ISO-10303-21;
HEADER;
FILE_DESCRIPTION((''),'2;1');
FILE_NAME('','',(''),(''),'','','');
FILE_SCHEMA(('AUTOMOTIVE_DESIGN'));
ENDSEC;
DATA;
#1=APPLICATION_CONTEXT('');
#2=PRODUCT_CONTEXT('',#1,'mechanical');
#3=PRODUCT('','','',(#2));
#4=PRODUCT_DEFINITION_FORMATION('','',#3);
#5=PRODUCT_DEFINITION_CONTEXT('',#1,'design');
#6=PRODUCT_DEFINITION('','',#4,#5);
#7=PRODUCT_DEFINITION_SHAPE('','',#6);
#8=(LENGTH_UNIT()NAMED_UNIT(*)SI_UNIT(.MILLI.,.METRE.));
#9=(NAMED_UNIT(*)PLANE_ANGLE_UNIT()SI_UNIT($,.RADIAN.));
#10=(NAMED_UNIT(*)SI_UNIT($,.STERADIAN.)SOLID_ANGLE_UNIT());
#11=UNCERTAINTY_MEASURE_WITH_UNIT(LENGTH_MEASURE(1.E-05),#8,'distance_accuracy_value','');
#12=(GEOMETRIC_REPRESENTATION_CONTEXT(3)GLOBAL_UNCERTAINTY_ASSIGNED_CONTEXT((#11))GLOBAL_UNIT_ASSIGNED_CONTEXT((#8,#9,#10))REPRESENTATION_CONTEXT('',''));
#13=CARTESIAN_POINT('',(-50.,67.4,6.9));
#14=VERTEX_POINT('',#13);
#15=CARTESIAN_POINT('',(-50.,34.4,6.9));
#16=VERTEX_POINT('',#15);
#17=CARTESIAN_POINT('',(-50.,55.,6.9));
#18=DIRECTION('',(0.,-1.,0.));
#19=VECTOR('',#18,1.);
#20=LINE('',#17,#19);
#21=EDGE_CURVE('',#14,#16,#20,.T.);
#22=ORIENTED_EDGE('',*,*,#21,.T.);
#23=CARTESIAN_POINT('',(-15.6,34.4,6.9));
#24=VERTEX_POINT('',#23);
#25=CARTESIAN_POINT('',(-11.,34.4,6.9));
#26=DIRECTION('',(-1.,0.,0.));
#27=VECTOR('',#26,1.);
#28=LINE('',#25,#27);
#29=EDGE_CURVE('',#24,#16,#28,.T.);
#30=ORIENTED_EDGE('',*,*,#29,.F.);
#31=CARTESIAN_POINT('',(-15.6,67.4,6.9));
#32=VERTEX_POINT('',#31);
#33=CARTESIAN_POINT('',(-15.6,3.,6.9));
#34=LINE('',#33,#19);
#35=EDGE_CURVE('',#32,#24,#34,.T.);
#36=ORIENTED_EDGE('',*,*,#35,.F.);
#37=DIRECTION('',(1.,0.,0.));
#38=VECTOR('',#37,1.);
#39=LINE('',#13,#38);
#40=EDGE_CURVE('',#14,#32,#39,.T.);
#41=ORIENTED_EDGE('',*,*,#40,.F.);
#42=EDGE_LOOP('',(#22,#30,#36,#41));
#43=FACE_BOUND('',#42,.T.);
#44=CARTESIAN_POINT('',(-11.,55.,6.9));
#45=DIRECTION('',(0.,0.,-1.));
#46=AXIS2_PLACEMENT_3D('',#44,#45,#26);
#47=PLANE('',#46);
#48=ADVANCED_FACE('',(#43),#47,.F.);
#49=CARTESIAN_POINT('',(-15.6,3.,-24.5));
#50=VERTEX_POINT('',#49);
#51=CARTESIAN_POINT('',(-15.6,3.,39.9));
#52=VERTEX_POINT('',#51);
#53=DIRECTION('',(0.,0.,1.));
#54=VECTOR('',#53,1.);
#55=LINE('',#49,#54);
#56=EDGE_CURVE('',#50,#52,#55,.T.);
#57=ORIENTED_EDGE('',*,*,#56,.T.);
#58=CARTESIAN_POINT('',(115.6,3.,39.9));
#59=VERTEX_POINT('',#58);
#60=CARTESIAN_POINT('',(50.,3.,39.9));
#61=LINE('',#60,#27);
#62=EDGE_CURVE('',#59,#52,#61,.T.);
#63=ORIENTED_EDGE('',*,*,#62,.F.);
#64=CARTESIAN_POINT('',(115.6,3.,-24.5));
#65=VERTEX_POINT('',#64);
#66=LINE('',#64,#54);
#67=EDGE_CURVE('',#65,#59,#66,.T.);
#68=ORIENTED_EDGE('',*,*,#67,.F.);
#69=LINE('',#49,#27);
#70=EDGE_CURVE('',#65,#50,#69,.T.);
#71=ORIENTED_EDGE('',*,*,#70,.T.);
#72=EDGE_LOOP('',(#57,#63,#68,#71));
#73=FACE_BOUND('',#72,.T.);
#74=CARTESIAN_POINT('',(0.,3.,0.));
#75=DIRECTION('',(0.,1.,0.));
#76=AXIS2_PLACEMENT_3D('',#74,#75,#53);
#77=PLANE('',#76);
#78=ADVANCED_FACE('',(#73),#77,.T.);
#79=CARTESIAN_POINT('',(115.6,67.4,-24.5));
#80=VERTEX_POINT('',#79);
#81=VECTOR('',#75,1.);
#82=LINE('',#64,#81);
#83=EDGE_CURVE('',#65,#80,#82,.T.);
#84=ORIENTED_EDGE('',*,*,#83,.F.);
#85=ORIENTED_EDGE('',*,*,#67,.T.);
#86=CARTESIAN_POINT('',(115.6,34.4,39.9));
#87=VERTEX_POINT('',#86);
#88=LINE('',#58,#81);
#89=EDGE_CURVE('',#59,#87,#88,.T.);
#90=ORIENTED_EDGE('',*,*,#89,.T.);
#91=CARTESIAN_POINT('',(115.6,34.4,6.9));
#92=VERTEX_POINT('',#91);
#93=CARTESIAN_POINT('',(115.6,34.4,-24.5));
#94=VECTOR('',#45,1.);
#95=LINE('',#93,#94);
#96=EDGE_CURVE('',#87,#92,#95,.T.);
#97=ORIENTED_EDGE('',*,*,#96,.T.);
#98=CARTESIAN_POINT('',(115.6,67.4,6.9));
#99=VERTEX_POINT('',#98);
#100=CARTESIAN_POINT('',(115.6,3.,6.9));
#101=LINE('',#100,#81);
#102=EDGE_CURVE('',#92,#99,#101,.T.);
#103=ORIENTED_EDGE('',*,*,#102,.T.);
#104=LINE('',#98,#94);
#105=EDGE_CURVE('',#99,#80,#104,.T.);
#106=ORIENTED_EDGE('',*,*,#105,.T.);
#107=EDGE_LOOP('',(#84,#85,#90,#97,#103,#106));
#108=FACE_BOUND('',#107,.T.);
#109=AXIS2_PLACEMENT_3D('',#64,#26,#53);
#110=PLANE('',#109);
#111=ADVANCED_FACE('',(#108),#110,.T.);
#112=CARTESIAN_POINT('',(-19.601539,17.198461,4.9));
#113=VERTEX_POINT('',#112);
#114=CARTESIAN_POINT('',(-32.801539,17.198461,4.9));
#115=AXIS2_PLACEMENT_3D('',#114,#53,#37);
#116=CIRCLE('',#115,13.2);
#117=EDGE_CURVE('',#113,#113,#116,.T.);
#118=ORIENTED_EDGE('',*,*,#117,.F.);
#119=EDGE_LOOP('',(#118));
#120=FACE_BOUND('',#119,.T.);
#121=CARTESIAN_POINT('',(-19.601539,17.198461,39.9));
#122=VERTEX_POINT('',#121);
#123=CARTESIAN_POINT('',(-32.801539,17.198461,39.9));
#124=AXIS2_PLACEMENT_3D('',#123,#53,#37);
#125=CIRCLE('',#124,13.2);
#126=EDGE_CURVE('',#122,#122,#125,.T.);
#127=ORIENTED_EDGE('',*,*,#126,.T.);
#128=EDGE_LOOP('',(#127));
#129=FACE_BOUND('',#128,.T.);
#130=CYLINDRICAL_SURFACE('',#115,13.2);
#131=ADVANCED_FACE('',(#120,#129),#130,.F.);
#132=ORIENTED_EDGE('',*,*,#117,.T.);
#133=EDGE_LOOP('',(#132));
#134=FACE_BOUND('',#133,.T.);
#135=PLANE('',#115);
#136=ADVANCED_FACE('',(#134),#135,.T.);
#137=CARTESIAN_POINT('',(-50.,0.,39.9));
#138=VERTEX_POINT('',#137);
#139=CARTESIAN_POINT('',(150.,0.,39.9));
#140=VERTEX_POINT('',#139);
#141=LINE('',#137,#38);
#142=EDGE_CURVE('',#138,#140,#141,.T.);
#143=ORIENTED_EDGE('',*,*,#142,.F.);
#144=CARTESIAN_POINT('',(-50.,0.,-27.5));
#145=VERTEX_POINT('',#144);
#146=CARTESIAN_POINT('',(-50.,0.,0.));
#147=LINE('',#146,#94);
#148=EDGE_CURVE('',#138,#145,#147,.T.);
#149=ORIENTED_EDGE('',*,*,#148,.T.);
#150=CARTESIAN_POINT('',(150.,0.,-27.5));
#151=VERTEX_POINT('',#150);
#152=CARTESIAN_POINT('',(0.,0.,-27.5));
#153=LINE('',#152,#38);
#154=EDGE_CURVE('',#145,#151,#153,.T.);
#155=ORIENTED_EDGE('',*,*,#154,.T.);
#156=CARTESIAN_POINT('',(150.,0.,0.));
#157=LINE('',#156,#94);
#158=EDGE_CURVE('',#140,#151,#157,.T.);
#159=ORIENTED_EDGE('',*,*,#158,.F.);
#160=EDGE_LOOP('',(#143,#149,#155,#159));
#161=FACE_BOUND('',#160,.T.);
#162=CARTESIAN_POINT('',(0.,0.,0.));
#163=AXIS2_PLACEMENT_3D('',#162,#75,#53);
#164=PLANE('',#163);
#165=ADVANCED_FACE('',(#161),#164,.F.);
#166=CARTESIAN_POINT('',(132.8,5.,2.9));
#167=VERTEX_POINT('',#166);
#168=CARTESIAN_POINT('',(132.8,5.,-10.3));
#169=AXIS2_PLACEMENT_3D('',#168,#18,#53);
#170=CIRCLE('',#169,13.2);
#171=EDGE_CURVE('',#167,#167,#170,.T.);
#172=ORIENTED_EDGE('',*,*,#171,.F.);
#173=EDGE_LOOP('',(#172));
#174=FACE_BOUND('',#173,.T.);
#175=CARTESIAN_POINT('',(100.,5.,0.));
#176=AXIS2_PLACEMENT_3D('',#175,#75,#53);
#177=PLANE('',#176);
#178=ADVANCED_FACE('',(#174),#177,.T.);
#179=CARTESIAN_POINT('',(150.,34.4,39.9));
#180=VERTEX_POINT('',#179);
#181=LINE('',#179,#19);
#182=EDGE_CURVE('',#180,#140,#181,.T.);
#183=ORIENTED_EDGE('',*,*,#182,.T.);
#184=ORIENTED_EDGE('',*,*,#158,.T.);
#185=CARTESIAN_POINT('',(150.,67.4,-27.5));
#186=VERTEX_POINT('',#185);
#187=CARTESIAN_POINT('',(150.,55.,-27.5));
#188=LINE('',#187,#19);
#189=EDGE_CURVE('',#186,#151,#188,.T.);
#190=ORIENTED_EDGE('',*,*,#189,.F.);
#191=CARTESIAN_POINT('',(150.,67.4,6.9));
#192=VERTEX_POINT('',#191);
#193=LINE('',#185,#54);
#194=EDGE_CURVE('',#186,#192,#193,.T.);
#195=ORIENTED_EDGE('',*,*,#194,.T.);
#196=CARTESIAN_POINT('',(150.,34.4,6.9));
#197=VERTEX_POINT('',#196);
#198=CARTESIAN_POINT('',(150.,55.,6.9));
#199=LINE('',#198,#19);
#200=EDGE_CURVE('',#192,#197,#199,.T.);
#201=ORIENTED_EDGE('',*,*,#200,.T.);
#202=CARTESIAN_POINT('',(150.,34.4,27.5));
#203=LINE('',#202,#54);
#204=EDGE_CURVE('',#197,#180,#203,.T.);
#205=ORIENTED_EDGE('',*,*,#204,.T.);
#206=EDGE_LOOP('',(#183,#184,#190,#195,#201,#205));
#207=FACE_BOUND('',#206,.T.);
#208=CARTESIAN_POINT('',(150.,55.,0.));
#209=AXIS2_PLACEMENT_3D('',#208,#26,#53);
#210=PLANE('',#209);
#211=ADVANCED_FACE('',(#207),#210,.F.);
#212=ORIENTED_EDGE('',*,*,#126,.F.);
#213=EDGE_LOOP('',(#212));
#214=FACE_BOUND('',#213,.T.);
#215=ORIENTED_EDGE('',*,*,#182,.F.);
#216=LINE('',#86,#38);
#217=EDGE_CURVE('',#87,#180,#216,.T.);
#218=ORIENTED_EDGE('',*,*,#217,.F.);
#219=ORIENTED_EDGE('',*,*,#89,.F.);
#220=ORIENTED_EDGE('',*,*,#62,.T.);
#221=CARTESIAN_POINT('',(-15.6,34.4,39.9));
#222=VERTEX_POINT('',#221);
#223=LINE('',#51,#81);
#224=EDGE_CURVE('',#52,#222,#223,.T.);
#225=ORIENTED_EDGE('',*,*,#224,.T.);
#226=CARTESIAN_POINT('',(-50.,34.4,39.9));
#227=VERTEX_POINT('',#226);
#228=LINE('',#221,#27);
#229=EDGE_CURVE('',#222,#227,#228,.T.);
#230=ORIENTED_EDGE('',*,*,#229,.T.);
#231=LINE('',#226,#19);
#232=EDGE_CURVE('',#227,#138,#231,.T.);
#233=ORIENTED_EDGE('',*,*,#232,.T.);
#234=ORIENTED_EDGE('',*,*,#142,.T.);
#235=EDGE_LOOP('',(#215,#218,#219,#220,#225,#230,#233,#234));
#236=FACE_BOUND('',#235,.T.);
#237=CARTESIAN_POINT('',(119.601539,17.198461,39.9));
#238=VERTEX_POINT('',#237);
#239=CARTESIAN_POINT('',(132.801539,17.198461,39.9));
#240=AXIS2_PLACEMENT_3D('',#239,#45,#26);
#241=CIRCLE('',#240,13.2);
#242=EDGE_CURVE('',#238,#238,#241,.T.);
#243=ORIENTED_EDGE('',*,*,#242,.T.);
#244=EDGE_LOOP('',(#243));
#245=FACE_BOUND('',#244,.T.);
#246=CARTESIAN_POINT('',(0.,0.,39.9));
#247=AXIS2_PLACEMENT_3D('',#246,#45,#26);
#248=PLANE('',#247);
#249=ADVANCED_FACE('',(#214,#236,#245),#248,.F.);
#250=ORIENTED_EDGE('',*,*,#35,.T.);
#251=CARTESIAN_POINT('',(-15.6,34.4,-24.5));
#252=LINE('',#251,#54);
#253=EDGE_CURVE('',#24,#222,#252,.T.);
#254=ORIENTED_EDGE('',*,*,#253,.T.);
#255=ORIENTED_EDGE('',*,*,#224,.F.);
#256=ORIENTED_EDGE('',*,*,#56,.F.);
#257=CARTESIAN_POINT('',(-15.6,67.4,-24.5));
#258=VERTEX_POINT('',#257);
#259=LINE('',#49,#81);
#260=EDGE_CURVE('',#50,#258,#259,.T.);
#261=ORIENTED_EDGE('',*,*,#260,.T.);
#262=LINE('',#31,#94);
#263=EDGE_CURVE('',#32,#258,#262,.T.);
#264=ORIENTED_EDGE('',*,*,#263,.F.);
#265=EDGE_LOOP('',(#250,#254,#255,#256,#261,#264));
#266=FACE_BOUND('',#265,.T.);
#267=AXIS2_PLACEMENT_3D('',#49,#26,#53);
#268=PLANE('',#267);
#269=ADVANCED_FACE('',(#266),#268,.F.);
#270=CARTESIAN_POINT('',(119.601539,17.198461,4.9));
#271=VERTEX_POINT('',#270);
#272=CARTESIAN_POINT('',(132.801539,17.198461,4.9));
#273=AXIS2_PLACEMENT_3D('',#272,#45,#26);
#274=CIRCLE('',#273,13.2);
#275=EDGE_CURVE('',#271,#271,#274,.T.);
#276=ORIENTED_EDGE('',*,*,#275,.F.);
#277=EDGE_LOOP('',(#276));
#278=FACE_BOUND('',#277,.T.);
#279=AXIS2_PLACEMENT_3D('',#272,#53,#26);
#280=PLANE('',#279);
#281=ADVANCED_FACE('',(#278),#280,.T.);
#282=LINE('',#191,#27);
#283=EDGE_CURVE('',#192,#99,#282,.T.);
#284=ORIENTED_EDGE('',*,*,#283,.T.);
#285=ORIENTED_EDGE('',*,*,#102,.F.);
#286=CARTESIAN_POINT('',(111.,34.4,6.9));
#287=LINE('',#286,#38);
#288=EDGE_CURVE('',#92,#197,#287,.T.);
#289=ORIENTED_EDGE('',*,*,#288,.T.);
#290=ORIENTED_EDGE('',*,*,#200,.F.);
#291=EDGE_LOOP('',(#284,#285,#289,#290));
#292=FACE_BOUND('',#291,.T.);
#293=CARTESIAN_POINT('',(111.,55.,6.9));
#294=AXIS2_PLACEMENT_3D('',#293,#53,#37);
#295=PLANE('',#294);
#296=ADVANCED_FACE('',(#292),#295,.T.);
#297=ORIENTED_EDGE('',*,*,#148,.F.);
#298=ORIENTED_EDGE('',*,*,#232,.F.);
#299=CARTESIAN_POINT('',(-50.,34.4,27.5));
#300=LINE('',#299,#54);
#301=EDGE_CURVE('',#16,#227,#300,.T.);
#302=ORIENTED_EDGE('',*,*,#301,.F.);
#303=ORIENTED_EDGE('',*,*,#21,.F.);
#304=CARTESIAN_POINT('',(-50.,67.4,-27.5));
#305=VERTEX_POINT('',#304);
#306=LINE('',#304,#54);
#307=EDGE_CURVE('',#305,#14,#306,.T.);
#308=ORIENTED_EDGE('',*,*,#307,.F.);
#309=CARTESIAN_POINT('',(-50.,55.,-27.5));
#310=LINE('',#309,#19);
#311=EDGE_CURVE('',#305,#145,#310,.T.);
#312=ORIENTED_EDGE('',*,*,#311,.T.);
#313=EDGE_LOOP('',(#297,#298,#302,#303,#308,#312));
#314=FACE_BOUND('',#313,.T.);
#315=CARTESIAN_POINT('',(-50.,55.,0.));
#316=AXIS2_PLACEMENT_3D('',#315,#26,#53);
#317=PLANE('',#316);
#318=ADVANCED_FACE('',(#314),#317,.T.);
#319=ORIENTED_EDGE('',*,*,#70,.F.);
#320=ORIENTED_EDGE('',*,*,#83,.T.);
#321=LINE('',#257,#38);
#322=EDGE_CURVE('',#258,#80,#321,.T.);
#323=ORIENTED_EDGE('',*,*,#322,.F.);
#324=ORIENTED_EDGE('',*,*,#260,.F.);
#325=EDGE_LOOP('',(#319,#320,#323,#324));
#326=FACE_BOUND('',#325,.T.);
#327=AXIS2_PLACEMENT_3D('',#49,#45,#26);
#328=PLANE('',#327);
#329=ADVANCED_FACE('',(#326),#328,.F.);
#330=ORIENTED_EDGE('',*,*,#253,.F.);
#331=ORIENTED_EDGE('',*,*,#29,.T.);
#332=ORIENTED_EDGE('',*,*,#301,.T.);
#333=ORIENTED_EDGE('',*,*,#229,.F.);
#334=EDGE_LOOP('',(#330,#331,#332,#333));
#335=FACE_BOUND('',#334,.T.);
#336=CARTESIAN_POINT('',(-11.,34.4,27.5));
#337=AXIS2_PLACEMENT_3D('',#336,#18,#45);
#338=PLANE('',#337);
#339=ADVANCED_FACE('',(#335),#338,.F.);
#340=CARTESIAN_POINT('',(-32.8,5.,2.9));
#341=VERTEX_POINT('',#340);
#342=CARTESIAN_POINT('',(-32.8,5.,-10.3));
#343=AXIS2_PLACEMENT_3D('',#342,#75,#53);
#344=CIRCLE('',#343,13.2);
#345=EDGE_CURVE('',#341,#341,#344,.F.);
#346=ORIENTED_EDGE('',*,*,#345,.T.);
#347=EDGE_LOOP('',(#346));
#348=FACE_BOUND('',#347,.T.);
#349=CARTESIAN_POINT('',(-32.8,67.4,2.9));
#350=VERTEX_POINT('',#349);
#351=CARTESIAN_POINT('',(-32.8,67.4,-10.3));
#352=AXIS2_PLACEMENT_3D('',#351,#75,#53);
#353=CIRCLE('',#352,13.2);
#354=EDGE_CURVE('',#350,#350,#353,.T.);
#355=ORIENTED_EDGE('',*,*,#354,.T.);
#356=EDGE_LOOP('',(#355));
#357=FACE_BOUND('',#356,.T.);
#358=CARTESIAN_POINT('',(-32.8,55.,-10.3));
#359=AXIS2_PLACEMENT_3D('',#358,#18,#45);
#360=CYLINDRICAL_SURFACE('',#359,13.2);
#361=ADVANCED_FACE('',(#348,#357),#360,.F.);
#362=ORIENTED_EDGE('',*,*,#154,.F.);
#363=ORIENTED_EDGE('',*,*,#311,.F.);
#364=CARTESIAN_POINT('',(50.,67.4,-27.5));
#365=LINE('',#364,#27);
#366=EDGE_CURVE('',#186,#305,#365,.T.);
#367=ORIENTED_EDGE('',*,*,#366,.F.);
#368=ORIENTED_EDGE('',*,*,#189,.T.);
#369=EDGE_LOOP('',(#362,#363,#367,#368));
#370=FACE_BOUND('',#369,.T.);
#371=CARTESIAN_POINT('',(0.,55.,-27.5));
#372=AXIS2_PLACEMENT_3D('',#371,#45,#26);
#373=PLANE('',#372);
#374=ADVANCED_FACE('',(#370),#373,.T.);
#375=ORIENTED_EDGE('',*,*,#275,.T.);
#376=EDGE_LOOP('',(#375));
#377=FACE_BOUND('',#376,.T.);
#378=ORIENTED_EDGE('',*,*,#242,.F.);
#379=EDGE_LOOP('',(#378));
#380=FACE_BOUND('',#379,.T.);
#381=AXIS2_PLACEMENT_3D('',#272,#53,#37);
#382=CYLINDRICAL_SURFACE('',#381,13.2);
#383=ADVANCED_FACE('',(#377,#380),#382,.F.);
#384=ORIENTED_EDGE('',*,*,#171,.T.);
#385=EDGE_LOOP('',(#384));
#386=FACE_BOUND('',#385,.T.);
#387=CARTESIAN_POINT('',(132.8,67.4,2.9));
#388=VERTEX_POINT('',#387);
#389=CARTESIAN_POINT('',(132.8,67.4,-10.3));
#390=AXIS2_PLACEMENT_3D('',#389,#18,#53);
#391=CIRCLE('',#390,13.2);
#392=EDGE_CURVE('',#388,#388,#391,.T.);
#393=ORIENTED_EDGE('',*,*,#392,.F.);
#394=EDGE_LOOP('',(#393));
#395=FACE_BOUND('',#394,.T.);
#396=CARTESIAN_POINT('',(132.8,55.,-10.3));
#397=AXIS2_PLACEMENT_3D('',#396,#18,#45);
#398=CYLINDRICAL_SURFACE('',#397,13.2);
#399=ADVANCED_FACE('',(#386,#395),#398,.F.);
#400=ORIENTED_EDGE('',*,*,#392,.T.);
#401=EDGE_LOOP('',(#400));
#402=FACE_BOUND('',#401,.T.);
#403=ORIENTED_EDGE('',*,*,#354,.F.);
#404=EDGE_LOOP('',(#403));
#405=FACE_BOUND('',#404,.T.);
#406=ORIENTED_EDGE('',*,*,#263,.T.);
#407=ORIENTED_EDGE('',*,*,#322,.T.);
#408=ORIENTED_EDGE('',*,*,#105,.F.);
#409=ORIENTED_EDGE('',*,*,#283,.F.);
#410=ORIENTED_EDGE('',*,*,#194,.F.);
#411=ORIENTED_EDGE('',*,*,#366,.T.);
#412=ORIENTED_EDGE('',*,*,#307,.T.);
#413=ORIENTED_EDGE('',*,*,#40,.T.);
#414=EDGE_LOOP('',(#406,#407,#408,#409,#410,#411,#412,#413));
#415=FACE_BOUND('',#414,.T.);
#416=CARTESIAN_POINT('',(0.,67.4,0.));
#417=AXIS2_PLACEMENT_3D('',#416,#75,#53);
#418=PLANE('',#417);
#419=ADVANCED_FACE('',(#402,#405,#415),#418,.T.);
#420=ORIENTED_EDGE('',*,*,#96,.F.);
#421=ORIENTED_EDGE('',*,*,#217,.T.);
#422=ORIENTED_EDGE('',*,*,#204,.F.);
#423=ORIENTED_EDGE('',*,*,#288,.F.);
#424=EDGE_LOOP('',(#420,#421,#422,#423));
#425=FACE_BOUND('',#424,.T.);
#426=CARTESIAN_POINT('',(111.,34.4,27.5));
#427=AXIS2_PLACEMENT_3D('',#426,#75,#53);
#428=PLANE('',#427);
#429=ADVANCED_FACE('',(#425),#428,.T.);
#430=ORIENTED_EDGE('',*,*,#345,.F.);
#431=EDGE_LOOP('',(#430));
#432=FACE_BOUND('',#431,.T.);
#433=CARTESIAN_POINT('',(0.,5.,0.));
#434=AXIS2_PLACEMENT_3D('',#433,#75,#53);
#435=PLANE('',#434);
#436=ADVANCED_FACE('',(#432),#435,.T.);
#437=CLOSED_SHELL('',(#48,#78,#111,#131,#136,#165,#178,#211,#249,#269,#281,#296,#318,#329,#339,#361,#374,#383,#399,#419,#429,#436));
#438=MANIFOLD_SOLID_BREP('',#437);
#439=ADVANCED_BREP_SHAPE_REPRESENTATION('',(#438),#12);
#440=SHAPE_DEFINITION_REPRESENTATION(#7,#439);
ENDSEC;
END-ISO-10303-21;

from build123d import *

# Parameters (mm, degrees)
SKETCH1_R           = 13.2
BOSS_EXTRUDE3_DEPTH = 5
SKETCH1_6_W         = 100
SKETCH1_6_H         = 55
SKETCH1_6_R         = 13.2
BOSS_EXTRUDE4_DEPTH = 55
SKETCH2_W           = 65.6
SKETCH2_H           = 52
CUT_EXTRUDE1_DEPTH  = 52
SKETCH3_R           = 13.2
CUT_EXTRUDE2_DEPTH  = 22.6
SKETCH4_W           = 20.6
SKETCH4_H           = 20.6
CUT_EXTRUDE4_DEPTH  = 39
SKETCH9_R           = 13.2
BOSS_EXTRUDE5_DEPTH = 12.4
BOSS_EXTRUDE7_START = 12.4
SKETCH10_R          = 13.2
BOSS_EXTRUDE7_DEPTH = 12.4
MIRROR1_START       = 30.398461356
MIRROR1_OUTLINE_R   = 13.2
MIRROR1_DEPTH       = 37.001538644
MIRROR1_2_OUTLINE_W = 100
MIRROR1_2_OUTLINE_H = 67.4
MIRROR1_2_OUTLINE_R = 13.2
MIRROR1_2_DEPTH     = 3
MIRROR1_3_OUTLINE_W = 34.4
MIRROR1_3_OUTLINE_H = 33
MIRROR1_3_DEPTH     = 4.001538644
MIRROR1_START_2     = 3
MIRROR1_4_OUTLINE_R = 13.2
MIRROR1_4_DEPTH     = 0.998461256
MIRROR1_START_3     = 3.998461256
MIRROR1_5_OUTLINE_R = 13.2
MIRROR1_5_DEPTH     = 26.4000001
MIRROR1_START_4     = 4.9
MIRROR1_6_OUTLINE_R = 13.2
MIRROR1_6_DEPTH     = 35


with BuildPart() as part:
    # Sketch1 → Boss-Extrude3 (new body)
    with BuildSketch(Plane(origin=(0, 0, 0), x_dir=(1, 0, 0), z_dir=(0, 1, 0))):
        with Locations(Location((-32.8, 10.3, 0), (0, 0, 270))):
            Circle(SKETCH1_R)
    boss_extrude3 = extrude(amount=BOSS_EXTRUDE3_DEPTH)

    # Sketch1<6> → Boss-Extrude4 (add)
    with BuildSketch(Plane(origin=(0, 0, 0), x_dir=(1, 0, 0), z_dir=(0, 1, 0))):
        Rectangle(SKETCH1_6_W, SKETCH1_6_H)
        with Locations(Location((-32.8, 10.3, 0), (0, 0, 270))):
            Circle(SKETCH1_6_R, mode=Mode.SUBTRACT)
    extrude(amount=BOSS_EXTRUDE4_DEPTH)

    # Sketch2 → Cut-Extrude1 (cut)
    with BuildSketch(Plane(origin=(0, 55, 0), x_dir=(1, 0, 0), z_dir=(0, 1, 0))):
        with Locations((17.2, -1.5)):
            Rectangle(SKETCH2_W, SKETCH2_H)
    extrude(amount=-CUT_EXTRUDE1_DEPTH, mode=Mode.SUBTRACT)

    # Sketch3 → Cut-Extrude2 (cut)
    with BuildSketch(Plane.XY.offset(27.5)):
        with Locations((-32.801538644, 17.198461356)):
            Circle(SKETCH3_R)
    extrude(amount=-CUT_EXTRUDE2_DEPTH, mode=Mode.SUBTRACT)

    # Sketch4 → Cut-Extrude4 (cut)
    with BuildSketch(Plane.ZY.offset(50)):
        with Locations((17.2, 44.7)):
            Rectangle(SKETCH4_W, SKETCH4_H)
    extrude(amount=-CUT_EXTRUDE4_DEPTH, mode=Mode.SUBTRACT)

    # Sketch9 → Boss-Extrude5 (add)
    with BuildSketch(Plane(origin=(0, 55, 0), x_dir=(1, 0, 0), z_dir=(0, 1, 0))):
        Polygon((-50, -6.9), (-15.6, -6.9), (-15.6, 24.5), (50, 24.5), (50, 27.5), (-50, 27.5), align=None)
        with Locations(Location((-32.8, 10.3, 0), (0, 0, 270))):
            Circle(SKETCH9_R, mode=Mode.SUBTRACT)
    extrude(amount=BOSS_EXTRUDE5_DEPTH)

    # Sketch10 → Boss-Extrude7 (add)
    with BuildSketch(Plane.XY.offset(27.5).offset(BOSS_EXTRUDE7_START)):
        Polygon((-15.6, 3), (-15.6, 34.4), (-50, 34.4), (-50, 0), (50, 0), (50, 3), align=None)
        with Locations((-32.801538644, 17.198461356)):
            Circle(SKETCH10_R, mode=Mode.SUBTRACT)
    extrude(amount=-BOSS_EXTRUDE7_DEPTH)

    # Mirror1: read off the stored shape, not the designer's step
    # Mirror1 outline → Mirror1 (add)
    with BuildSketch(Plane(origin=(0, 0, 0), x_dir=(1, 0, 0), z_dir=(0, 1, 0)).offset(MIRROR1_START)):
        Polygon((150, -6.9), (150, 27.5), (50, 27.5), (50, 24.5), (115.6, 24.5), (115.6, -6.9), align=None)
        with Locations((132.8, 10.3)):
            Circle(MIRROR1_OUTLINE_R, mode=Mode.SUBTRACT)
    extrude(amount=MIRROR1_DEPTH)

    # Mirror1 2 outline → Mirror1 2 (add)
    with BuildSketch(Plane(origin=(0, 0, 0), x_dir=(1, 0, 0), z_dir=(0, 1, 0))):
        with Locations((100, -6.2)):
            Rectangle(MIRROR1_2_OUTLINE_W, MIRROR1_2_OUTLINE_H)
        with Locations((132.8, 10.3)):
            Circle(MIRROR1_2_OUTLINE_R, mode=Mode.SUBTRACT)
    extrude(amount=MIRROR1_2_DEPTH)

    # Mirror1 3 outline → Mirror1 3 (add)
    with BuildSketch(Plane(origin=(0, 0, 0), x_dir=(1, 0, 0), z_dir=(0, 1, 0)).offset(MIRROR1_START)):
        with Locations((132.8, -23.4)):
            Rectangle(MIRROR1_3_OUTLINE_W, MIRROR1_3_OUTLINE_H)
    extrude(amount=MIRROR1_3_DEPTH)

    # Mirror1 4 outline → Mirror1 4 (add)
    with BuildSketch(Plane(origin=(0, 0, 0), x_dir=(1, 0, 0), z_dir=(0, 1, 0)).offset(MIRROR1_START_2)):
        Polygon((150, 27.5), (50, 27.5), (50, 24.5), (115.6, 24.5), (115.6, -39.9), (150, -39.9), align=None)
        with Locations((132.8, 10.3)):
            Circle(MIRROR1_4_OUTLINE_R, mode=Mode.SUBTRACT)
    extrude(amount=MIRROR1_4_DEPTH)

    # Mirror1 5 outline → Mirror1 5 (add)
    with BuildSketch(Plane(origin=(0, 0, 0), x_dir=(1, 0, 0), z_dir=(0, 1, 0)).offset(MIRROR1_START_3)):
        Polygon((150, -39.9), (150, 27.5), (50, 27.5), (50, 24.5), (115.6, 24.5), (115.6, -39.9), align=None)
        with Locations((132.8, 10.3)):
            Circle(MIRROR1_5_OUTLINE_R, mode=Mode.SUBTRACT)
    extrude(amount=MIRROR1_5_DEPTH)

    # Mirror1 6 outline → Mirror1 6 (cut)
    with BuildSketch(Plane.XY.offset(MIRROR1_START_4)):
        with Locations((132.801538644, 17.198461356)):
            Circle(MIRROR1_6_OUTLINE_R)
    extrude(amount=MIRROR1_6_DEPTH, mode=Mode.SUBTRACT)

    # Mirror2: Boss-Extrude3 across plane
    add(boss_extrude3.mirror(Plane.ZY.offset(-50)))


solid = part.part
